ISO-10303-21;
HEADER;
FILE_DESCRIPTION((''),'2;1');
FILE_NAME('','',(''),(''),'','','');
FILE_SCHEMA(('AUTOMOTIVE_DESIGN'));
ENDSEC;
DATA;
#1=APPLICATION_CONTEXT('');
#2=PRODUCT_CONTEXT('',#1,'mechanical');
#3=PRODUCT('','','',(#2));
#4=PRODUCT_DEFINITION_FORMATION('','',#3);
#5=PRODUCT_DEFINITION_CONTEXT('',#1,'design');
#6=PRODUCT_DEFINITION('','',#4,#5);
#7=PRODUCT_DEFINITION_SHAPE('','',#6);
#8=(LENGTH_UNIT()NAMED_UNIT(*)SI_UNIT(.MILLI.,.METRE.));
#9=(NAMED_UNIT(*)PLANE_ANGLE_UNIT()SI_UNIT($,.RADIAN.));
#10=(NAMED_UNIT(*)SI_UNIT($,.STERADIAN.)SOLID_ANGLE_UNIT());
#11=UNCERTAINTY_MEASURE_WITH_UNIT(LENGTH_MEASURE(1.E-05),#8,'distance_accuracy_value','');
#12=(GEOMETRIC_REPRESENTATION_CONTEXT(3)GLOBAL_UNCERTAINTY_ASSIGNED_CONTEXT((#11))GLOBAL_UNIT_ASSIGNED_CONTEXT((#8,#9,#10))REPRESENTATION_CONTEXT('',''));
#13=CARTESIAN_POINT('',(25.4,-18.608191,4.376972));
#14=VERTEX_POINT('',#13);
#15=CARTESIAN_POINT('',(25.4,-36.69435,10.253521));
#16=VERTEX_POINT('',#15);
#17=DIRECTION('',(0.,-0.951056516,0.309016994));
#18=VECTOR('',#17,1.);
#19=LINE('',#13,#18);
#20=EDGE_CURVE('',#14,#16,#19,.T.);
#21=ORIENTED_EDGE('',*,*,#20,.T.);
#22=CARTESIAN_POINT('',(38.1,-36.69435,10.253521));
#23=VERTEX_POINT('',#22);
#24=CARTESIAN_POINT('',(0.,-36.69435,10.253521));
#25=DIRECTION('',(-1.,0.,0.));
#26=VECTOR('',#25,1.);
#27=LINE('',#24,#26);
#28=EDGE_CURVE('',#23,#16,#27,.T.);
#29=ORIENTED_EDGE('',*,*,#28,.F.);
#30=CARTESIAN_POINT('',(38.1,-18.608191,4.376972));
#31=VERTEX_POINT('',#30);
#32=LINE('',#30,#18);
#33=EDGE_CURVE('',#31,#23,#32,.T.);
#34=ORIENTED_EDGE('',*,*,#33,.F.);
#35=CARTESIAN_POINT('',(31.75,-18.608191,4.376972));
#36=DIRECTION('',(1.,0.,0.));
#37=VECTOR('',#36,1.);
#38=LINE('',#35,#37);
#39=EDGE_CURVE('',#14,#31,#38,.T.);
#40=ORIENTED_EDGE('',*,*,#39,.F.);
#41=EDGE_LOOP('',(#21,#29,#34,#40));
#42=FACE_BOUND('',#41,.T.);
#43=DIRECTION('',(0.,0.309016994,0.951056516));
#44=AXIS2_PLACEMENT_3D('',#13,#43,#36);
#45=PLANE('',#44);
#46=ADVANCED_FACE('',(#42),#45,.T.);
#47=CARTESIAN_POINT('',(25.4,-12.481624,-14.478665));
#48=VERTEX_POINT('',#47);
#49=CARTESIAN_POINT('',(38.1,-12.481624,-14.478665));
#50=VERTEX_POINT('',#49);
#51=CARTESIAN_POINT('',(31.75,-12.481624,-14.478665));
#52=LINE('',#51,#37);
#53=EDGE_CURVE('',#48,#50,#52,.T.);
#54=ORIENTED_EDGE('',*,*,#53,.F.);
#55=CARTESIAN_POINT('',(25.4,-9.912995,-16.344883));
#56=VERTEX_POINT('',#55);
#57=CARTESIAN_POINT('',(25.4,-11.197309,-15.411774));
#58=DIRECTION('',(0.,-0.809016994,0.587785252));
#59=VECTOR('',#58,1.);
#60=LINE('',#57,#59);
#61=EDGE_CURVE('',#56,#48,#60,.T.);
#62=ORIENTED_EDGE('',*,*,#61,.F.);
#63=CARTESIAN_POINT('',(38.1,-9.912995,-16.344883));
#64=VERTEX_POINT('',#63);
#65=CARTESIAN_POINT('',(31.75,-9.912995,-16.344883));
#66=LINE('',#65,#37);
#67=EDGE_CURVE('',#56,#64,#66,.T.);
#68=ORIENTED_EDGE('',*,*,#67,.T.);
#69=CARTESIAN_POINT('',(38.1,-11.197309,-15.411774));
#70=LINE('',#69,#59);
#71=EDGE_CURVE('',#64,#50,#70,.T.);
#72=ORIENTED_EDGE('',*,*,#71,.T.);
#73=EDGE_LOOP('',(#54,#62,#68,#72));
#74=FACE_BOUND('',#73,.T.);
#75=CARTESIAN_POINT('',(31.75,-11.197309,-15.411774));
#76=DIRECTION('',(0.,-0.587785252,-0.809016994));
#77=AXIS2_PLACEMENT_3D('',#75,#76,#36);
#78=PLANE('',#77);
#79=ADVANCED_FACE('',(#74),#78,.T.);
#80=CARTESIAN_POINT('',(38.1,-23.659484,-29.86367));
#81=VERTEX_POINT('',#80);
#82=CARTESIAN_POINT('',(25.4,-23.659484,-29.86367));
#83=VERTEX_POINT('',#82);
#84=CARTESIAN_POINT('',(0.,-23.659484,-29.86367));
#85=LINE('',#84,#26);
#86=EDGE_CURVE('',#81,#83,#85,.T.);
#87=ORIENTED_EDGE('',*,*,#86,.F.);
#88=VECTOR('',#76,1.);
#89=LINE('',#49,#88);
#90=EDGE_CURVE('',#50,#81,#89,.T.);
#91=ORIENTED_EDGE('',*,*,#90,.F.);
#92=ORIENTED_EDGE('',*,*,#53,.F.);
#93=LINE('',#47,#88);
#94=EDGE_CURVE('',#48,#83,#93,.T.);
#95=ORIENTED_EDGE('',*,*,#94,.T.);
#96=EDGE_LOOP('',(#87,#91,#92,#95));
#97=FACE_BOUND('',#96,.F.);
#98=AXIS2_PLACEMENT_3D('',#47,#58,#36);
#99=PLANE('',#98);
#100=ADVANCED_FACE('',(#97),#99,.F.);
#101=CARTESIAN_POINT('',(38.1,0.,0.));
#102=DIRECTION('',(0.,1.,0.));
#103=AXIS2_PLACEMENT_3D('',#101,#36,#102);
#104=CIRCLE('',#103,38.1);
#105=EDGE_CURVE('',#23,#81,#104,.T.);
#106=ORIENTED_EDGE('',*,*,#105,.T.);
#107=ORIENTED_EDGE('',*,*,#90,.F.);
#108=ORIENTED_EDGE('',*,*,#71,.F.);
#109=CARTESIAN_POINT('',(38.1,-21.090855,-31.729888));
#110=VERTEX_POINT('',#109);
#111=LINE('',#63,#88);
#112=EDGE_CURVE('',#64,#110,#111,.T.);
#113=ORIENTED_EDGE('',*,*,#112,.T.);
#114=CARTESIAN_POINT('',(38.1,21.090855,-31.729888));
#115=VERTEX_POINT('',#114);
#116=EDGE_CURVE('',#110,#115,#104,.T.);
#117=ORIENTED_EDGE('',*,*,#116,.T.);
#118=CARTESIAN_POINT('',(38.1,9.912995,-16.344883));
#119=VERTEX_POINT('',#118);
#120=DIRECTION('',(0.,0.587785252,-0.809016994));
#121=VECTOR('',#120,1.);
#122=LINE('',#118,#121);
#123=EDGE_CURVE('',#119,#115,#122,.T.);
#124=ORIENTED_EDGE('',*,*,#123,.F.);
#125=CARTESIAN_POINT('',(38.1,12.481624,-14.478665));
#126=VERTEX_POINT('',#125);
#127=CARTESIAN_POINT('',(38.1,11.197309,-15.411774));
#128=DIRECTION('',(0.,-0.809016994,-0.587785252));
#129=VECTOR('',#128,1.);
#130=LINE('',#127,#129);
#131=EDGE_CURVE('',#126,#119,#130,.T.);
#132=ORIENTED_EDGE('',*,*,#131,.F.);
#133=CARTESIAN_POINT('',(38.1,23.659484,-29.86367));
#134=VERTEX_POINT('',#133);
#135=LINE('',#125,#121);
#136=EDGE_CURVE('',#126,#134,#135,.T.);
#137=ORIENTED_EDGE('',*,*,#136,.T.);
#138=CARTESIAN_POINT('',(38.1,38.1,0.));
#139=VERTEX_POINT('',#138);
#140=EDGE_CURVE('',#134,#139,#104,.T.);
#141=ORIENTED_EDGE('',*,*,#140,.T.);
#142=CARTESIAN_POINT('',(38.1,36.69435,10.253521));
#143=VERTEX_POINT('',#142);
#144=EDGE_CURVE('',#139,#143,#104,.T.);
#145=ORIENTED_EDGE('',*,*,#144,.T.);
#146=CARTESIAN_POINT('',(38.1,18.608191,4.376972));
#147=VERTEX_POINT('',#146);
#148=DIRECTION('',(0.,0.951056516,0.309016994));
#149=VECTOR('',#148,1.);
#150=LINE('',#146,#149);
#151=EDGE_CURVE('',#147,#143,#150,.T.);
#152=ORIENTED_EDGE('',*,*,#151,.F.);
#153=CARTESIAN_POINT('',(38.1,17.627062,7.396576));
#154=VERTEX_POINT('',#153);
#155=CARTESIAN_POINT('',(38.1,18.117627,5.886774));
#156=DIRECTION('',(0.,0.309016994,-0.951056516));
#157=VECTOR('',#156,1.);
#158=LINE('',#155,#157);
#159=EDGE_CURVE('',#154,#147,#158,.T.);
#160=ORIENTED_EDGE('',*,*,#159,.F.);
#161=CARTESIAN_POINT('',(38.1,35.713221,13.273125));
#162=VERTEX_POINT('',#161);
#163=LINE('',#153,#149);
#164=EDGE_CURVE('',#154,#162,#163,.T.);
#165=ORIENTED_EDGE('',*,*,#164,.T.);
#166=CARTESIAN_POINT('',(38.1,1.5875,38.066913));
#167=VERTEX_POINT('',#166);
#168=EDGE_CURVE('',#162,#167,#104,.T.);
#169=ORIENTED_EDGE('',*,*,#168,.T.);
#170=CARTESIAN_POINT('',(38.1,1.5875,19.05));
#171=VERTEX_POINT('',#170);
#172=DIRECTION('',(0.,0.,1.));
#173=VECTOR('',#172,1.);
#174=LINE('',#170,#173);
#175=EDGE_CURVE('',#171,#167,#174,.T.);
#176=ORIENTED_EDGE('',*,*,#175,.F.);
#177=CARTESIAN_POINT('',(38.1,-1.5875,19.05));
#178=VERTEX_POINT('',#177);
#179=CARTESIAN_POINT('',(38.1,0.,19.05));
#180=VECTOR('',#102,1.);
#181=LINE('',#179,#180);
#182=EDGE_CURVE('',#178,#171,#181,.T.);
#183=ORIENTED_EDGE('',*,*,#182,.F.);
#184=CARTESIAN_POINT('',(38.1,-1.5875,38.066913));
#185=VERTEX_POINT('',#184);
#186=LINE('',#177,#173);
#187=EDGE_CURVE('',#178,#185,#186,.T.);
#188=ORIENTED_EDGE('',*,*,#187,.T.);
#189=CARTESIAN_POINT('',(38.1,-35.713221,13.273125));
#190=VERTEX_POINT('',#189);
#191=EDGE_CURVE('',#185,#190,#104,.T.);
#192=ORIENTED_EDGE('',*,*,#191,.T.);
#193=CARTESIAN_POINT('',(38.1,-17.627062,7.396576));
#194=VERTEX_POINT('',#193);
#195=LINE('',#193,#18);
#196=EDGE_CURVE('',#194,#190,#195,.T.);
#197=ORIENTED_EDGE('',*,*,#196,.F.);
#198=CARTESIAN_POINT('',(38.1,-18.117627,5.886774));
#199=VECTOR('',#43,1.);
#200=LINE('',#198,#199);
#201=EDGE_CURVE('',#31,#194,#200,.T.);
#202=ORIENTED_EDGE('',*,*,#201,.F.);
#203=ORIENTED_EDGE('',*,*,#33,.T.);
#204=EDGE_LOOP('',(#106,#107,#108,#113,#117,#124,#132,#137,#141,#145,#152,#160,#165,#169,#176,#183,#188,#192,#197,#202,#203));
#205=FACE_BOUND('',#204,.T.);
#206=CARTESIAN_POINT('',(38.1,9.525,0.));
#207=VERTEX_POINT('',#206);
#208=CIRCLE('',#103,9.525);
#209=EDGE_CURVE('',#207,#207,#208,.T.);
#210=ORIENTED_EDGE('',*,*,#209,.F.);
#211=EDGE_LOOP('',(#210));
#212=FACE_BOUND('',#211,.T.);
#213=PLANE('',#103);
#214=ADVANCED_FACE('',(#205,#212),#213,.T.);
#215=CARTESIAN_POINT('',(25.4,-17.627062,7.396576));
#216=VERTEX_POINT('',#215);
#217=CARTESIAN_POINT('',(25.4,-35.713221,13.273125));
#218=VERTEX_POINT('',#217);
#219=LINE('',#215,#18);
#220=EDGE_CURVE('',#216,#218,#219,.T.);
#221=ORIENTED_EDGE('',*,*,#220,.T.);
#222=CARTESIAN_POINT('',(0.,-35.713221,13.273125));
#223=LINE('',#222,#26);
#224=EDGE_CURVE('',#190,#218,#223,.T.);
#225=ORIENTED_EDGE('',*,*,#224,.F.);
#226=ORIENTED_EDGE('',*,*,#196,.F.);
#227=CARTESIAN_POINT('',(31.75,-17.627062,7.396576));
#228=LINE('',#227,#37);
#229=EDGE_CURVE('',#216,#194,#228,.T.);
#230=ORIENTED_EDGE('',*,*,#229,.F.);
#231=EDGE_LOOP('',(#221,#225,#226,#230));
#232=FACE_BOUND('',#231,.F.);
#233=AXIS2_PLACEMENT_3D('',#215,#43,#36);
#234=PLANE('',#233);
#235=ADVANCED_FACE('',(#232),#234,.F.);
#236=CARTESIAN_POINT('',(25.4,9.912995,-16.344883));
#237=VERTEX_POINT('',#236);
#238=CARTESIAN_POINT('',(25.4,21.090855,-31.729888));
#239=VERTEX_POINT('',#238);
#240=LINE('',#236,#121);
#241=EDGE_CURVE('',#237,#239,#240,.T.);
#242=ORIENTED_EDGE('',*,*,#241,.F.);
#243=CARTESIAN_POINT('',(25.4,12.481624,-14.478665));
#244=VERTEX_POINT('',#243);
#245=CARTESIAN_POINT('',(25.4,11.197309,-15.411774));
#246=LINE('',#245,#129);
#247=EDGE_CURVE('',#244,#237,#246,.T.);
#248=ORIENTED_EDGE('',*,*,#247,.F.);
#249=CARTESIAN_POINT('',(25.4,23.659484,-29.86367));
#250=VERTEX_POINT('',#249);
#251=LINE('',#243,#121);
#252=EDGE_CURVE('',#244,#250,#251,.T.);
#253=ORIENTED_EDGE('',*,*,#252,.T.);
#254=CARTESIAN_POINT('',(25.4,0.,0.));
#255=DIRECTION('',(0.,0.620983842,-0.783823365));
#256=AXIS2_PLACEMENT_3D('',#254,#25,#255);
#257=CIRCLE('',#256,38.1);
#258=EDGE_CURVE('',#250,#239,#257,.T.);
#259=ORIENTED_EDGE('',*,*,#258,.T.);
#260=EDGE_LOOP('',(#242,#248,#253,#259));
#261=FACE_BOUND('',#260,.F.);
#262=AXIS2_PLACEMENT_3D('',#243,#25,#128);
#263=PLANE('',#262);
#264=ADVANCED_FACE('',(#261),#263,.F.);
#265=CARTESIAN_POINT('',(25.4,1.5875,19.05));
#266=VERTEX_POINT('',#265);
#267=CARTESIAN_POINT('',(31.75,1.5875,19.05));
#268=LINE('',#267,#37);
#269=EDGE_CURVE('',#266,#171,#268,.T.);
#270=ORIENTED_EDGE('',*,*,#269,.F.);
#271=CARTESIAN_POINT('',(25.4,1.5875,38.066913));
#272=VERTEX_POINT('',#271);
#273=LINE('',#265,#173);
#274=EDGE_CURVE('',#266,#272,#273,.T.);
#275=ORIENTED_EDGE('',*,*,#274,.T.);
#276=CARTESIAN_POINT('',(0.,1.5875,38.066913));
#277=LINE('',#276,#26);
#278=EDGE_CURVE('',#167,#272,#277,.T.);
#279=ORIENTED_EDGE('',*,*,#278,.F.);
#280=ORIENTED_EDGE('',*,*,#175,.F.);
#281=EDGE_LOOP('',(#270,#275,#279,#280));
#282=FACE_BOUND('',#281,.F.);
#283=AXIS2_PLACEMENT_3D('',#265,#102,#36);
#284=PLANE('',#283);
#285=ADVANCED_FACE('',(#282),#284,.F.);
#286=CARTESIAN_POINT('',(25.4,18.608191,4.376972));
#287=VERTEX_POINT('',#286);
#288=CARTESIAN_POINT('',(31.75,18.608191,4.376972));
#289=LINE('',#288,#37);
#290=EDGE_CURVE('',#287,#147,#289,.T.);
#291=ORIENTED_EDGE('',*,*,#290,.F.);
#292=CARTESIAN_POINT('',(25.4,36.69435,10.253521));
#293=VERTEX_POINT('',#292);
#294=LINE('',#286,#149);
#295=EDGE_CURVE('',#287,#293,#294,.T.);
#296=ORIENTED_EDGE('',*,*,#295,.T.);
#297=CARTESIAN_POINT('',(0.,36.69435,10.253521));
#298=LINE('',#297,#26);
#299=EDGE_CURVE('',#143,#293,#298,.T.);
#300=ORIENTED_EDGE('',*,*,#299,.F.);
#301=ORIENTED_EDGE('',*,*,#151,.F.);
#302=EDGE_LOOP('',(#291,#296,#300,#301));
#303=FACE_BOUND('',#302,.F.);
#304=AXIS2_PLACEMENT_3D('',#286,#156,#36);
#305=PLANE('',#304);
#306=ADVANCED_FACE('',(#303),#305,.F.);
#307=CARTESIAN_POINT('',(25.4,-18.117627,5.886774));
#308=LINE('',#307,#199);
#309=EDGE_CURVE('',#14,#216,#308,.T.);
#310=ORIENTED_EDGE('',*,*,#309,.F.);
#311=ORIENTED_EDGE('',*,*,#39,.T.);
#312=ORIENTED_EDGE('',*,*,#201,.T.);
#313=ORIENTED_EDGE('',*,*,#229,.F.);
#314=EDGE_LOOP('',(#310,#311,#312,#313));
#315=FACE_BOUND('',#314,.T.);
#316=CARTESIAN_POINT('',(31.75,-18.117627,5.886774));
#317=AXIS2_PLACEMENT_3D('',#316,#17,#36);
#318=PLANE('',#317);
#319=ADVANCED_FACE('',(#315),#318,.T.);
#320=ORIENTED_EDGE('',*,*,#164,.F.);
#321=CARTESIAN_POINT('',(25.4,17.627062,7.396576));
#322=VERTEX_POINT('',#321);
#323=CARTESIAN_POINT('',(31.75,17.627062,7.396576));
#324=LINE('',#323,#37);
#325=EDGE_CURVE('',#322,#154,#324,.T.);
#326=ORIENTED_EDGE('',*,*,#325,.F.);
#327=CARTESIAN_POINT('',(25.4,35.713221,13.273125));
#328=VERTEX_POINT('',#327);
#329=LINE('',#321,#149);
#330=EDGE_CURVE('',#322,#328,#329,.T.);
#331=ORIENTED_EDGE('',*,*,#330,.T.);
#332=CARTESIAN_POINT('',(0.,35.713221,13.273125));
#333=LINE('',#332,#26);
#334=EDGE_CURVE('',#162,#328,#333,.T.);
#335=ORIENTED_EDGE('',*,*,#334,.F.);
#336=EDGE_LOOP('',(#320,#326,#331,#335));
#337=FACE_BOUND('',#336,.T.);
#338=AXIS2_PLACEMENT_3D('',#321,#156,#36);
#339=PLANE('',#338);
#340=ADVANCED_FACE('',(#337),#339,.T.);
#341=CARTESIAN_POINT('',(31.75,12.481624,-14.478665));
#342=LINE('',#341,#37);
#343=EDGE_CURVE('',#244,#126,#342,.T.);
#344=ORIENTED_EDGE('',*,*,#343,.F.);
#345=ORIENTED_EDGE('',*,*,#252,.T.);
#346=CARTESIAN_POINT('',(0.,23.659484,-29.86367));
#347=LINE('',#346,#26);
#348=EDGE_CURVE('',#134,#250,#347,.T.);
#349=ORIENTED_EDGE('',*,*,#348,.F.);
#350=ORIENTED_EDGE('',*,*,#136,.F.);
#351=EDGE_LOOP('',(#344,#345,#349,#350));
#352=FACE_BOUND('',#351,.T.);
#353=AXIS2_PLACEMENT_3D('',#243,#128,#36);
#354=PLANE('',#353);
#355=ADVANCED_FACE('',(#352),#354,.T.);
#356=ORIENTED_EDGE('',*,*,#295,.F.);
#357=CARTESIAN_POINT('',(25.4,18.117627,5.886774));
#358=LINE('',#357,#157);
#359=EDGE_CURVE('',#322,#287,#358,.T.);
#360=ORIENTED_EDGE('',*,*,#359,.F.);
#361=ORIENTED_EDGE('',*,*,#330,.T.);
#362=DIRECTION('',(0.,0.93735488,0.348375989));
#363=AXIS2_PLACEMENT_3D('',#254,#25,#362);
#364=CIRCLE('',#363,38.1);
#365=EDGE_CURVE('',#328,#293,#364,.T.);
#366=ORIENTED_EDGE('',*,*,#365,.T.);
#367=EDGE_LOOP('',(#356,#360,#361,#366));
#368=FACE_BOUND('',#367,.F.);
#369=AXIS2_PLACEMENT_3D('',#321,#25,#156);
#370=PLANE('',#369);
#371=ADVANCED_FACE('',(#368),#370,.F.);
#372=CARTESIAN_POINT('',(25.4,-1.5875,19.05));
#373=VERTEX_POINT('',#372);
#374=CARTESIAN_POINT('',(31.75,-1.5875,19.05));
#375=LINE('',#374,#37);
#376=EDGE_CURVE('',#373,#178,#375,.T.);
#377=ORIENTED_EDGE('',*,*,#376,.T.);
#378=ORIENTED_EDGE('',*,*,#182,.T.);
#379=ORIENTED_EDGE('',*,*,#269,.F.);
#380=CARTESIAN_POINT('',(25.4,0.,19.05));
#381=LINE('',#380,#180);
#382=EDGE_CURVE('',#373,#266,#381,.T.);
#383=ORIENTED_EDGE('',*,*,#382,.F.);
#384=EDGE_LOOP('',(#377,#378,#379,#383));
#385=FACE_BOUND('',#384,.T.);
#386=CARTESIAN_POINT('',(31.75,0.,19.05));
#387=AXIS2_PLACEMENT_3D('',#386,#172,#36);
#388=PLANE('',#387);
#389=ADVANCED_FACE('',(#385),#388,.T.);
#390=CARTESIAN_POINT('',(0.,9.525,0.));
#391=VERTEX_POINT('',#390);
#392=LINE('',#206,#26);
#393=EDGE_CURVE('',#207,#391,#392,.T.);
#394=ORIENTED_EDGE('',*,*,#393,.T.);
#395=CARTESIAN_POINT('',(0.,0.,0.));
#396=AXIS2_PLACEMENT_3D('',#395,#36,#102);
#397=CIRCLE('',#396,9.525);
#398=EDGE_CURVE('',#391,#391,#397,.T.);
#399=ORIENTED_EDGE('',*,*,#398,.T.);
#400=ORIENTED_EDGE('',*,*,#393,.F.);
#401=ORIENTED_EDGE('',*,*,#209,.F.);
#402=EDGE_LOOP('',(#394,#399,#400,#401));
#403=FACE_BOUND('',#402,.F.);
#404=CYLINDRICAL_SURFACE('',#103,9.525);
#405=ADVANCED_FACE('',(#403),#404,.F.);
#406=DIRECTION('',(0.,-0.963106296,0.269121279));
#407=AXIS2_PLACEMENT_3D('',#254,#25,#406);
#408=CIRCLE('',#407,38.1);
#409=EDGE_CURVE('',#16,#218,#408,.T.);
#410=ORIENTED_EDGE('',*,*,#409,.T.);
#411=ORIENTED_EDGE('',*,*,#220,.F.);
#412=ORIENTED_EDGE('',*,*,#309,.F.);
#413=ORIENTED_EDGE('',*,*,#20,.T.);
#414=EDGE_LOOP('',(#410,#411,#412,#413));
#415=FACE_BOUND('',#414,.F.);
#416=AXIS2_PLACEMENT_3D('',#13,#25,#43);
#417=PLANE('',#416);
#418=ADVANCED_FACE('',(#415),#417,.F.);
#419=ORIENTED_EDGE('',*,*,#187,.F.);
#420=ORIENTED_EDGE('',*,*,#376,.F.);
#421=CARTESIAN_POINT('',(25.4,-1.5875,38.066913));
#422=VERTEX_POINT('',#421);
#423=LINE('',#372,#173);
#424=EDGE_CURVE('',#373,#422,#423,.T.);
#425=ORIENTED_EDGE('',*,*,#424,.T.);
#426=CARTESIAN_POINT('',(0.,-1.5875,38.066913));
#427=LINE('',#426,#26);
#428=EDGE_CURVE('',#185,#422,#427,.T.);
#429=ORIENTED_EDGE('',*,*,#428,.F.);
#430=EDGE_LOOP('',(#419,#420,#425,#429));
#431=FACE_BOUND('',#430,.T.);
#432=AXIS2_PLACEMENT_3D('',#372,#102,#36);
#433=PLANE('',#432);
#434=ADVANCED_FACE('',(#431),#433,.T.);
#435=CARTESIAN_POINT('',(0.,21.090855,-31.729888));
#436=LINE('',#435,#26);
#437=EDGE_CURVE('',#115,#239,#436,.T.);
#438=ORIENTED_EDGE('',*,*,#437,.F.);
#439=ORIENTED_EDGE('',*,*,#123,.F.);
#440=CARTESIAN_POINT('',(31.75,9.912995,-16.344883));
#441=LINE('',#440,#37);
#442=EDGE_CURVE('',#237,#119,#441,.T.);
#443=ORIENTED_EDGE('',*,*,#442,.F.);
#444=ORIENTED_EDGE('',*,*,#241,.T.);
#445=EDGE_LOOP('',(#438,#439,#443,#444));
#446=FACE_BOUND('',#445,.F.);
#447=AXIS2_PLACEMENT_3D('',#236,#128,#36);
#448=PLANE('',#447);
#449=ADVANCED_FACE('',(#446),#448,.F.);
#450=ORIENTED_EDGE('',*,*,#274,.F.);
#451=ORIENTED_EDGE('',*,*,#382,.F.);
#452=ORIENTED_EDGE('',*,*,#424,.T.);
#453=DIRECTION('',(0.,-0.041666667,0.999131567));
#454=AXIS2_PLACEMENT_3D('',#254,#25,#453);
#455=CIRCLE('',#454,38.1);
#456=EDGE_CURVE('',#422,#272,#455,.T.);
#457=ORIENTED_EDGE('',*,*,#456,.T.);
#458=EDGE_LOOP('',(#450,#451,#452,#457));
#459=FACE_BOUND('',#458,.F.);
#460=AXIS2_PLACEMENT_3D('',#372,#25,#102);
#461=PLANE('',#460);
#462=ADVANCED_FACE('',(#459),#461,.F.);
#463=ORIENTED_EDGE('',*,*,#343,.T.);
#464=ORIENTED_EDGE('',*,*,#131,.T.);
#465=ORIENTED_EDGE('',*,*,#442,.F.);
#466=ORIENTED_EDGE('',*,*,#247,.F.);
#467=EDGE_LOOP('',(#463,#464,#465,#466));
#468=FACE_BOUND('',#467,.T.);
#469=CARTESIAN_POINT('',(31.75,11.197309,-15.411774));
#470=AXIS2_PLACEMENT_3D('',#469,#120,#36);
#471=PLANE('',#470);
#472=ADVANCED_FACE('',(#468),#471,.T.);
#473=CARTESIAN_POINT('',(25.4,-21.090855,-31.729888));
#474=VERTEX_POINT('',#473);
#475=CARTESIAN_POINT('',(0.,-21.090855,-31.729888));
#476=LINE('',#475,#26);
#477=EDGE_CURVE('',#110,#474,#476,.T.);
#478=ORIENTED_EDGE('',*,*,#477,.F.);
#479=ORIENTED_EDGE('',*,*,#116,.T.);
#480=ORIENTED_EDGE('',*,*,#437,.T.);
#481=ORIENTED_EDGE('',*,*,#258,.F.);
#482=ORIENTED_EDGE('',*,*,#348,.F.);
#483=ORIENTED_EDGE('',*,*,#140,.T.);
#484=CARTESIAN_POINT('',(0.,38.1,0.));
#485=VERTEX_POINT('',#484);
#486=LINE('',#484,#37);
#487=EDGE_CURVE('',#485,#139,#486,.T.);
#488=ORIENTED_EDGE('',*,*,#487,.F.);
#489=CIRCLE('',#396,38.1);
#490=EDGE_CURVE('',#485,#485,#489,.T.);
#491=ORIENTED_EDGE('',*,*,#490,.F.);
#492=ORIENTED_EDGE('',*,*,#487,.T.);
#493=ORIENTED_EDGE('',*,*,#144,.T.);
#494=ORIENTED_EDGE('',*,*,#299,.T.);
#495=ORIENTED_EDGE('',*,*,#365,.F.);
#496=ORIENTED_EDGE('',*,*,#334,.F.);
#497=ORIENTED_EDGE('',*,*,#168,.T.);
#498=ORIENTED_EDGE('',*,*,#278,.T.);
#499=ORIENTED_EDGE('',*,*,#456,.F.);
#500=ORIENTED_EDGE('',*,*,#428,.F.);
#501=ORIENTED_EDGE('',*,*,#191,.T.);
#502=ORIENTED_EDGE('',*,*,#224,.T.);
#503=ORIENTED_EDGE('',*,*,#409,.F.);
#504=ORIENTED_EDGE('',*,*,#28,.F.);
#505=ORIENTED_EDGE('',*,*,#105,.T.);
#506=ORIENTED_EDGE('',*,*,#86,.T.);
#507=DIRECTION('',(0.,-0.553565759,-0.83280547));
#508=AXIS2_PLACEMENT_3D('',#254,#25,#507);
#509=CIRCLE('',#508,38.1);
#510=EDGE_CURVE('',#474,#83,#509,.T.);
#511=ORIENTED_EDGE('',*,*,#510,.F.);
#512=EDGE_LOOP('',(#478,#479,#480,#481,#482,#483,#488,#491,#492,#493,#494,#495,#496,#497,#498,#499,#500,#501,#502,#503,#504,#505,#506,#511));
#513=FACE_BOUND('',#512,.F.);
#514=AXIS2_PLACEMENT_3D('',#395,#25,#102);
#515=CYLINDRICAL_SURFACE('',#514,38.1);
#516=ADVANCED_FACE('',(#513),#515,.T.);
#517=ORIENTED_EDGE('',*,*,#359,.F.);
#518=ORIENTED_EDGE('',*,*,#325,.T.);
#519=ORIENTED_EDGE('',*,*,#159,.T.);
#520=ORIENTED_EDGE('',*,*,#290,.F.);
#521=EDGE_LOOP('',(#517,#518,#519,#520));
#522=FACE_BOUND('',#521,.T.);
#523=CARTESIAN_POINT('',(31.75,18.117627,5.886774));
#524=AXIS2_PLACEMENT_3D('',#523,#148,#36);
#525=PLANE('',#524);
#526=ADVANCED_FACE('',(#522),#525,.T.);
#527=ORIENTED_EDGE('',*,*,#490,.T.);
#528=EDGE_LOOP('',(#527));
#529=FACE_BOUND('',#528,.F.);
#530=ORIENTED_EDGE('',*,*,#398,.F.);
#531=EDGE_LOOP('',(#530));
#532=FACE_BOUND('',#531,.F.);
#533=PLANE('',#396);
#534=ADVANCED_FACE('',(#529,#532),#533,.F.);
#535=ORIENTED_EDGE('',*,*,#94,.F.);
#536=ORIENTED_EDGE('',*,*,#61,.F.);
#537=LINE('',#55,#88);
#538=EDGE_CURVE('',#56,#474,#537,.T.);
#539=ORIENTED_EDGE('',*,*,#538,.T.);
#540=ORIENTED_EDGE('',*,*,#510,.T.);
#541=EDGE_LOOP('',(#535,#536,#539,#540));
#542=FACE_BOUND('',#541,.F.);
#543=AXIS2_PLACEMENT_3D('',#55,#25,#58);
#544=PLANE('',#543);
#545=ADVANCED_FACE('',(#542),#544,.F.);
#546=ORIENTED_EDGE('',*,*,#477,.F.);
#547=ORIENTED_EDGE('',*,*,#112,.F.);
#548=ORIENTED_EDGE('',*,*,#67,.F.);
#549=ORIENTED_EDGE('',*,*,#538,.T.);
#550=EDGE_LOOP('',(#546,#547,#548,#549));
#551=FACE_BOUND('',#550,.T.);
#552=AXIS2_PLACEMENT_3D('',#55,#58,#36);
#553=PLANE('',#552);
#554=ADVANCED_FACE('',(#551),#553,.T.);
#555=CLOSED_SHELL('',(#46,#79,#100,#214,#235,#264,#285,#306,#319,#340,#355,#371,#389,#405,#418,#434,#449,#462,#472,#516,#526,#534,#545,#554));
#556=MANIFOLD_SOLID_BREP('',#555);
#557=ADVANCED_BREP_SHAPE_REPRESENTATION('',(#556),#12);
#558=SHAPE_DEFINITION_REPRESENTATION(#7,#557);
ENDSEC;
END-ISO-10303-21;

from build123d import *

# Parameters (mm, degrees)
F0_R            = 38.1
F1_DEPTH        = 38.1
F3_START        = 19.05
F2_W            = 12.7
F2_H            = 3.175
F3_DEPTH        = 19.05
F3_COPIES_COUNT = 5
F4_R            = 9.525
F5_DEPTH        = 38.101


# Not quite as in the source:
# - a pattern or mirror of a feature is missing from the dataset's text; its kind, count and spacing are read off the source's solid


with BuildPart() as f1:
    # F0 (on Right) → F1 (new body)
    with BuildSketch(Plane.YZ):
        Circle(F0_R)
    extrude(amount=F1_DEPTH)

    # F2 (on Top) → F3 (cut)
    with BuildSketch(Plane.XY.offset(F3_START)):
        with Locations((31.75, 0)):
            Rectangle(F2_W, F2_H)
    f3 = extrude(amount=F3_DEPTH, mode=Mode.SUBTRACT)

    # F3_copies: F3 ×5 about axis
    f3_copies_axis = Axis((0, 0, 0), (1, 0, 0))
    for i in range(1, F3_COPIES_COUNT):
        add(f3.rotate(f3_copies_axis, i * 360 / F3_COPIES_COUNT), mode=Mode.SUBTRACT)

    # F4 (on face) → F5 (cut, through all)
    with BuildSketch(Plane.YZ.offset(38.1)):
        Circle(F4_R)
    extrude(amount=-F5_DEPTH, mode=Mode.SUBTRACT)


solid = f1.part
